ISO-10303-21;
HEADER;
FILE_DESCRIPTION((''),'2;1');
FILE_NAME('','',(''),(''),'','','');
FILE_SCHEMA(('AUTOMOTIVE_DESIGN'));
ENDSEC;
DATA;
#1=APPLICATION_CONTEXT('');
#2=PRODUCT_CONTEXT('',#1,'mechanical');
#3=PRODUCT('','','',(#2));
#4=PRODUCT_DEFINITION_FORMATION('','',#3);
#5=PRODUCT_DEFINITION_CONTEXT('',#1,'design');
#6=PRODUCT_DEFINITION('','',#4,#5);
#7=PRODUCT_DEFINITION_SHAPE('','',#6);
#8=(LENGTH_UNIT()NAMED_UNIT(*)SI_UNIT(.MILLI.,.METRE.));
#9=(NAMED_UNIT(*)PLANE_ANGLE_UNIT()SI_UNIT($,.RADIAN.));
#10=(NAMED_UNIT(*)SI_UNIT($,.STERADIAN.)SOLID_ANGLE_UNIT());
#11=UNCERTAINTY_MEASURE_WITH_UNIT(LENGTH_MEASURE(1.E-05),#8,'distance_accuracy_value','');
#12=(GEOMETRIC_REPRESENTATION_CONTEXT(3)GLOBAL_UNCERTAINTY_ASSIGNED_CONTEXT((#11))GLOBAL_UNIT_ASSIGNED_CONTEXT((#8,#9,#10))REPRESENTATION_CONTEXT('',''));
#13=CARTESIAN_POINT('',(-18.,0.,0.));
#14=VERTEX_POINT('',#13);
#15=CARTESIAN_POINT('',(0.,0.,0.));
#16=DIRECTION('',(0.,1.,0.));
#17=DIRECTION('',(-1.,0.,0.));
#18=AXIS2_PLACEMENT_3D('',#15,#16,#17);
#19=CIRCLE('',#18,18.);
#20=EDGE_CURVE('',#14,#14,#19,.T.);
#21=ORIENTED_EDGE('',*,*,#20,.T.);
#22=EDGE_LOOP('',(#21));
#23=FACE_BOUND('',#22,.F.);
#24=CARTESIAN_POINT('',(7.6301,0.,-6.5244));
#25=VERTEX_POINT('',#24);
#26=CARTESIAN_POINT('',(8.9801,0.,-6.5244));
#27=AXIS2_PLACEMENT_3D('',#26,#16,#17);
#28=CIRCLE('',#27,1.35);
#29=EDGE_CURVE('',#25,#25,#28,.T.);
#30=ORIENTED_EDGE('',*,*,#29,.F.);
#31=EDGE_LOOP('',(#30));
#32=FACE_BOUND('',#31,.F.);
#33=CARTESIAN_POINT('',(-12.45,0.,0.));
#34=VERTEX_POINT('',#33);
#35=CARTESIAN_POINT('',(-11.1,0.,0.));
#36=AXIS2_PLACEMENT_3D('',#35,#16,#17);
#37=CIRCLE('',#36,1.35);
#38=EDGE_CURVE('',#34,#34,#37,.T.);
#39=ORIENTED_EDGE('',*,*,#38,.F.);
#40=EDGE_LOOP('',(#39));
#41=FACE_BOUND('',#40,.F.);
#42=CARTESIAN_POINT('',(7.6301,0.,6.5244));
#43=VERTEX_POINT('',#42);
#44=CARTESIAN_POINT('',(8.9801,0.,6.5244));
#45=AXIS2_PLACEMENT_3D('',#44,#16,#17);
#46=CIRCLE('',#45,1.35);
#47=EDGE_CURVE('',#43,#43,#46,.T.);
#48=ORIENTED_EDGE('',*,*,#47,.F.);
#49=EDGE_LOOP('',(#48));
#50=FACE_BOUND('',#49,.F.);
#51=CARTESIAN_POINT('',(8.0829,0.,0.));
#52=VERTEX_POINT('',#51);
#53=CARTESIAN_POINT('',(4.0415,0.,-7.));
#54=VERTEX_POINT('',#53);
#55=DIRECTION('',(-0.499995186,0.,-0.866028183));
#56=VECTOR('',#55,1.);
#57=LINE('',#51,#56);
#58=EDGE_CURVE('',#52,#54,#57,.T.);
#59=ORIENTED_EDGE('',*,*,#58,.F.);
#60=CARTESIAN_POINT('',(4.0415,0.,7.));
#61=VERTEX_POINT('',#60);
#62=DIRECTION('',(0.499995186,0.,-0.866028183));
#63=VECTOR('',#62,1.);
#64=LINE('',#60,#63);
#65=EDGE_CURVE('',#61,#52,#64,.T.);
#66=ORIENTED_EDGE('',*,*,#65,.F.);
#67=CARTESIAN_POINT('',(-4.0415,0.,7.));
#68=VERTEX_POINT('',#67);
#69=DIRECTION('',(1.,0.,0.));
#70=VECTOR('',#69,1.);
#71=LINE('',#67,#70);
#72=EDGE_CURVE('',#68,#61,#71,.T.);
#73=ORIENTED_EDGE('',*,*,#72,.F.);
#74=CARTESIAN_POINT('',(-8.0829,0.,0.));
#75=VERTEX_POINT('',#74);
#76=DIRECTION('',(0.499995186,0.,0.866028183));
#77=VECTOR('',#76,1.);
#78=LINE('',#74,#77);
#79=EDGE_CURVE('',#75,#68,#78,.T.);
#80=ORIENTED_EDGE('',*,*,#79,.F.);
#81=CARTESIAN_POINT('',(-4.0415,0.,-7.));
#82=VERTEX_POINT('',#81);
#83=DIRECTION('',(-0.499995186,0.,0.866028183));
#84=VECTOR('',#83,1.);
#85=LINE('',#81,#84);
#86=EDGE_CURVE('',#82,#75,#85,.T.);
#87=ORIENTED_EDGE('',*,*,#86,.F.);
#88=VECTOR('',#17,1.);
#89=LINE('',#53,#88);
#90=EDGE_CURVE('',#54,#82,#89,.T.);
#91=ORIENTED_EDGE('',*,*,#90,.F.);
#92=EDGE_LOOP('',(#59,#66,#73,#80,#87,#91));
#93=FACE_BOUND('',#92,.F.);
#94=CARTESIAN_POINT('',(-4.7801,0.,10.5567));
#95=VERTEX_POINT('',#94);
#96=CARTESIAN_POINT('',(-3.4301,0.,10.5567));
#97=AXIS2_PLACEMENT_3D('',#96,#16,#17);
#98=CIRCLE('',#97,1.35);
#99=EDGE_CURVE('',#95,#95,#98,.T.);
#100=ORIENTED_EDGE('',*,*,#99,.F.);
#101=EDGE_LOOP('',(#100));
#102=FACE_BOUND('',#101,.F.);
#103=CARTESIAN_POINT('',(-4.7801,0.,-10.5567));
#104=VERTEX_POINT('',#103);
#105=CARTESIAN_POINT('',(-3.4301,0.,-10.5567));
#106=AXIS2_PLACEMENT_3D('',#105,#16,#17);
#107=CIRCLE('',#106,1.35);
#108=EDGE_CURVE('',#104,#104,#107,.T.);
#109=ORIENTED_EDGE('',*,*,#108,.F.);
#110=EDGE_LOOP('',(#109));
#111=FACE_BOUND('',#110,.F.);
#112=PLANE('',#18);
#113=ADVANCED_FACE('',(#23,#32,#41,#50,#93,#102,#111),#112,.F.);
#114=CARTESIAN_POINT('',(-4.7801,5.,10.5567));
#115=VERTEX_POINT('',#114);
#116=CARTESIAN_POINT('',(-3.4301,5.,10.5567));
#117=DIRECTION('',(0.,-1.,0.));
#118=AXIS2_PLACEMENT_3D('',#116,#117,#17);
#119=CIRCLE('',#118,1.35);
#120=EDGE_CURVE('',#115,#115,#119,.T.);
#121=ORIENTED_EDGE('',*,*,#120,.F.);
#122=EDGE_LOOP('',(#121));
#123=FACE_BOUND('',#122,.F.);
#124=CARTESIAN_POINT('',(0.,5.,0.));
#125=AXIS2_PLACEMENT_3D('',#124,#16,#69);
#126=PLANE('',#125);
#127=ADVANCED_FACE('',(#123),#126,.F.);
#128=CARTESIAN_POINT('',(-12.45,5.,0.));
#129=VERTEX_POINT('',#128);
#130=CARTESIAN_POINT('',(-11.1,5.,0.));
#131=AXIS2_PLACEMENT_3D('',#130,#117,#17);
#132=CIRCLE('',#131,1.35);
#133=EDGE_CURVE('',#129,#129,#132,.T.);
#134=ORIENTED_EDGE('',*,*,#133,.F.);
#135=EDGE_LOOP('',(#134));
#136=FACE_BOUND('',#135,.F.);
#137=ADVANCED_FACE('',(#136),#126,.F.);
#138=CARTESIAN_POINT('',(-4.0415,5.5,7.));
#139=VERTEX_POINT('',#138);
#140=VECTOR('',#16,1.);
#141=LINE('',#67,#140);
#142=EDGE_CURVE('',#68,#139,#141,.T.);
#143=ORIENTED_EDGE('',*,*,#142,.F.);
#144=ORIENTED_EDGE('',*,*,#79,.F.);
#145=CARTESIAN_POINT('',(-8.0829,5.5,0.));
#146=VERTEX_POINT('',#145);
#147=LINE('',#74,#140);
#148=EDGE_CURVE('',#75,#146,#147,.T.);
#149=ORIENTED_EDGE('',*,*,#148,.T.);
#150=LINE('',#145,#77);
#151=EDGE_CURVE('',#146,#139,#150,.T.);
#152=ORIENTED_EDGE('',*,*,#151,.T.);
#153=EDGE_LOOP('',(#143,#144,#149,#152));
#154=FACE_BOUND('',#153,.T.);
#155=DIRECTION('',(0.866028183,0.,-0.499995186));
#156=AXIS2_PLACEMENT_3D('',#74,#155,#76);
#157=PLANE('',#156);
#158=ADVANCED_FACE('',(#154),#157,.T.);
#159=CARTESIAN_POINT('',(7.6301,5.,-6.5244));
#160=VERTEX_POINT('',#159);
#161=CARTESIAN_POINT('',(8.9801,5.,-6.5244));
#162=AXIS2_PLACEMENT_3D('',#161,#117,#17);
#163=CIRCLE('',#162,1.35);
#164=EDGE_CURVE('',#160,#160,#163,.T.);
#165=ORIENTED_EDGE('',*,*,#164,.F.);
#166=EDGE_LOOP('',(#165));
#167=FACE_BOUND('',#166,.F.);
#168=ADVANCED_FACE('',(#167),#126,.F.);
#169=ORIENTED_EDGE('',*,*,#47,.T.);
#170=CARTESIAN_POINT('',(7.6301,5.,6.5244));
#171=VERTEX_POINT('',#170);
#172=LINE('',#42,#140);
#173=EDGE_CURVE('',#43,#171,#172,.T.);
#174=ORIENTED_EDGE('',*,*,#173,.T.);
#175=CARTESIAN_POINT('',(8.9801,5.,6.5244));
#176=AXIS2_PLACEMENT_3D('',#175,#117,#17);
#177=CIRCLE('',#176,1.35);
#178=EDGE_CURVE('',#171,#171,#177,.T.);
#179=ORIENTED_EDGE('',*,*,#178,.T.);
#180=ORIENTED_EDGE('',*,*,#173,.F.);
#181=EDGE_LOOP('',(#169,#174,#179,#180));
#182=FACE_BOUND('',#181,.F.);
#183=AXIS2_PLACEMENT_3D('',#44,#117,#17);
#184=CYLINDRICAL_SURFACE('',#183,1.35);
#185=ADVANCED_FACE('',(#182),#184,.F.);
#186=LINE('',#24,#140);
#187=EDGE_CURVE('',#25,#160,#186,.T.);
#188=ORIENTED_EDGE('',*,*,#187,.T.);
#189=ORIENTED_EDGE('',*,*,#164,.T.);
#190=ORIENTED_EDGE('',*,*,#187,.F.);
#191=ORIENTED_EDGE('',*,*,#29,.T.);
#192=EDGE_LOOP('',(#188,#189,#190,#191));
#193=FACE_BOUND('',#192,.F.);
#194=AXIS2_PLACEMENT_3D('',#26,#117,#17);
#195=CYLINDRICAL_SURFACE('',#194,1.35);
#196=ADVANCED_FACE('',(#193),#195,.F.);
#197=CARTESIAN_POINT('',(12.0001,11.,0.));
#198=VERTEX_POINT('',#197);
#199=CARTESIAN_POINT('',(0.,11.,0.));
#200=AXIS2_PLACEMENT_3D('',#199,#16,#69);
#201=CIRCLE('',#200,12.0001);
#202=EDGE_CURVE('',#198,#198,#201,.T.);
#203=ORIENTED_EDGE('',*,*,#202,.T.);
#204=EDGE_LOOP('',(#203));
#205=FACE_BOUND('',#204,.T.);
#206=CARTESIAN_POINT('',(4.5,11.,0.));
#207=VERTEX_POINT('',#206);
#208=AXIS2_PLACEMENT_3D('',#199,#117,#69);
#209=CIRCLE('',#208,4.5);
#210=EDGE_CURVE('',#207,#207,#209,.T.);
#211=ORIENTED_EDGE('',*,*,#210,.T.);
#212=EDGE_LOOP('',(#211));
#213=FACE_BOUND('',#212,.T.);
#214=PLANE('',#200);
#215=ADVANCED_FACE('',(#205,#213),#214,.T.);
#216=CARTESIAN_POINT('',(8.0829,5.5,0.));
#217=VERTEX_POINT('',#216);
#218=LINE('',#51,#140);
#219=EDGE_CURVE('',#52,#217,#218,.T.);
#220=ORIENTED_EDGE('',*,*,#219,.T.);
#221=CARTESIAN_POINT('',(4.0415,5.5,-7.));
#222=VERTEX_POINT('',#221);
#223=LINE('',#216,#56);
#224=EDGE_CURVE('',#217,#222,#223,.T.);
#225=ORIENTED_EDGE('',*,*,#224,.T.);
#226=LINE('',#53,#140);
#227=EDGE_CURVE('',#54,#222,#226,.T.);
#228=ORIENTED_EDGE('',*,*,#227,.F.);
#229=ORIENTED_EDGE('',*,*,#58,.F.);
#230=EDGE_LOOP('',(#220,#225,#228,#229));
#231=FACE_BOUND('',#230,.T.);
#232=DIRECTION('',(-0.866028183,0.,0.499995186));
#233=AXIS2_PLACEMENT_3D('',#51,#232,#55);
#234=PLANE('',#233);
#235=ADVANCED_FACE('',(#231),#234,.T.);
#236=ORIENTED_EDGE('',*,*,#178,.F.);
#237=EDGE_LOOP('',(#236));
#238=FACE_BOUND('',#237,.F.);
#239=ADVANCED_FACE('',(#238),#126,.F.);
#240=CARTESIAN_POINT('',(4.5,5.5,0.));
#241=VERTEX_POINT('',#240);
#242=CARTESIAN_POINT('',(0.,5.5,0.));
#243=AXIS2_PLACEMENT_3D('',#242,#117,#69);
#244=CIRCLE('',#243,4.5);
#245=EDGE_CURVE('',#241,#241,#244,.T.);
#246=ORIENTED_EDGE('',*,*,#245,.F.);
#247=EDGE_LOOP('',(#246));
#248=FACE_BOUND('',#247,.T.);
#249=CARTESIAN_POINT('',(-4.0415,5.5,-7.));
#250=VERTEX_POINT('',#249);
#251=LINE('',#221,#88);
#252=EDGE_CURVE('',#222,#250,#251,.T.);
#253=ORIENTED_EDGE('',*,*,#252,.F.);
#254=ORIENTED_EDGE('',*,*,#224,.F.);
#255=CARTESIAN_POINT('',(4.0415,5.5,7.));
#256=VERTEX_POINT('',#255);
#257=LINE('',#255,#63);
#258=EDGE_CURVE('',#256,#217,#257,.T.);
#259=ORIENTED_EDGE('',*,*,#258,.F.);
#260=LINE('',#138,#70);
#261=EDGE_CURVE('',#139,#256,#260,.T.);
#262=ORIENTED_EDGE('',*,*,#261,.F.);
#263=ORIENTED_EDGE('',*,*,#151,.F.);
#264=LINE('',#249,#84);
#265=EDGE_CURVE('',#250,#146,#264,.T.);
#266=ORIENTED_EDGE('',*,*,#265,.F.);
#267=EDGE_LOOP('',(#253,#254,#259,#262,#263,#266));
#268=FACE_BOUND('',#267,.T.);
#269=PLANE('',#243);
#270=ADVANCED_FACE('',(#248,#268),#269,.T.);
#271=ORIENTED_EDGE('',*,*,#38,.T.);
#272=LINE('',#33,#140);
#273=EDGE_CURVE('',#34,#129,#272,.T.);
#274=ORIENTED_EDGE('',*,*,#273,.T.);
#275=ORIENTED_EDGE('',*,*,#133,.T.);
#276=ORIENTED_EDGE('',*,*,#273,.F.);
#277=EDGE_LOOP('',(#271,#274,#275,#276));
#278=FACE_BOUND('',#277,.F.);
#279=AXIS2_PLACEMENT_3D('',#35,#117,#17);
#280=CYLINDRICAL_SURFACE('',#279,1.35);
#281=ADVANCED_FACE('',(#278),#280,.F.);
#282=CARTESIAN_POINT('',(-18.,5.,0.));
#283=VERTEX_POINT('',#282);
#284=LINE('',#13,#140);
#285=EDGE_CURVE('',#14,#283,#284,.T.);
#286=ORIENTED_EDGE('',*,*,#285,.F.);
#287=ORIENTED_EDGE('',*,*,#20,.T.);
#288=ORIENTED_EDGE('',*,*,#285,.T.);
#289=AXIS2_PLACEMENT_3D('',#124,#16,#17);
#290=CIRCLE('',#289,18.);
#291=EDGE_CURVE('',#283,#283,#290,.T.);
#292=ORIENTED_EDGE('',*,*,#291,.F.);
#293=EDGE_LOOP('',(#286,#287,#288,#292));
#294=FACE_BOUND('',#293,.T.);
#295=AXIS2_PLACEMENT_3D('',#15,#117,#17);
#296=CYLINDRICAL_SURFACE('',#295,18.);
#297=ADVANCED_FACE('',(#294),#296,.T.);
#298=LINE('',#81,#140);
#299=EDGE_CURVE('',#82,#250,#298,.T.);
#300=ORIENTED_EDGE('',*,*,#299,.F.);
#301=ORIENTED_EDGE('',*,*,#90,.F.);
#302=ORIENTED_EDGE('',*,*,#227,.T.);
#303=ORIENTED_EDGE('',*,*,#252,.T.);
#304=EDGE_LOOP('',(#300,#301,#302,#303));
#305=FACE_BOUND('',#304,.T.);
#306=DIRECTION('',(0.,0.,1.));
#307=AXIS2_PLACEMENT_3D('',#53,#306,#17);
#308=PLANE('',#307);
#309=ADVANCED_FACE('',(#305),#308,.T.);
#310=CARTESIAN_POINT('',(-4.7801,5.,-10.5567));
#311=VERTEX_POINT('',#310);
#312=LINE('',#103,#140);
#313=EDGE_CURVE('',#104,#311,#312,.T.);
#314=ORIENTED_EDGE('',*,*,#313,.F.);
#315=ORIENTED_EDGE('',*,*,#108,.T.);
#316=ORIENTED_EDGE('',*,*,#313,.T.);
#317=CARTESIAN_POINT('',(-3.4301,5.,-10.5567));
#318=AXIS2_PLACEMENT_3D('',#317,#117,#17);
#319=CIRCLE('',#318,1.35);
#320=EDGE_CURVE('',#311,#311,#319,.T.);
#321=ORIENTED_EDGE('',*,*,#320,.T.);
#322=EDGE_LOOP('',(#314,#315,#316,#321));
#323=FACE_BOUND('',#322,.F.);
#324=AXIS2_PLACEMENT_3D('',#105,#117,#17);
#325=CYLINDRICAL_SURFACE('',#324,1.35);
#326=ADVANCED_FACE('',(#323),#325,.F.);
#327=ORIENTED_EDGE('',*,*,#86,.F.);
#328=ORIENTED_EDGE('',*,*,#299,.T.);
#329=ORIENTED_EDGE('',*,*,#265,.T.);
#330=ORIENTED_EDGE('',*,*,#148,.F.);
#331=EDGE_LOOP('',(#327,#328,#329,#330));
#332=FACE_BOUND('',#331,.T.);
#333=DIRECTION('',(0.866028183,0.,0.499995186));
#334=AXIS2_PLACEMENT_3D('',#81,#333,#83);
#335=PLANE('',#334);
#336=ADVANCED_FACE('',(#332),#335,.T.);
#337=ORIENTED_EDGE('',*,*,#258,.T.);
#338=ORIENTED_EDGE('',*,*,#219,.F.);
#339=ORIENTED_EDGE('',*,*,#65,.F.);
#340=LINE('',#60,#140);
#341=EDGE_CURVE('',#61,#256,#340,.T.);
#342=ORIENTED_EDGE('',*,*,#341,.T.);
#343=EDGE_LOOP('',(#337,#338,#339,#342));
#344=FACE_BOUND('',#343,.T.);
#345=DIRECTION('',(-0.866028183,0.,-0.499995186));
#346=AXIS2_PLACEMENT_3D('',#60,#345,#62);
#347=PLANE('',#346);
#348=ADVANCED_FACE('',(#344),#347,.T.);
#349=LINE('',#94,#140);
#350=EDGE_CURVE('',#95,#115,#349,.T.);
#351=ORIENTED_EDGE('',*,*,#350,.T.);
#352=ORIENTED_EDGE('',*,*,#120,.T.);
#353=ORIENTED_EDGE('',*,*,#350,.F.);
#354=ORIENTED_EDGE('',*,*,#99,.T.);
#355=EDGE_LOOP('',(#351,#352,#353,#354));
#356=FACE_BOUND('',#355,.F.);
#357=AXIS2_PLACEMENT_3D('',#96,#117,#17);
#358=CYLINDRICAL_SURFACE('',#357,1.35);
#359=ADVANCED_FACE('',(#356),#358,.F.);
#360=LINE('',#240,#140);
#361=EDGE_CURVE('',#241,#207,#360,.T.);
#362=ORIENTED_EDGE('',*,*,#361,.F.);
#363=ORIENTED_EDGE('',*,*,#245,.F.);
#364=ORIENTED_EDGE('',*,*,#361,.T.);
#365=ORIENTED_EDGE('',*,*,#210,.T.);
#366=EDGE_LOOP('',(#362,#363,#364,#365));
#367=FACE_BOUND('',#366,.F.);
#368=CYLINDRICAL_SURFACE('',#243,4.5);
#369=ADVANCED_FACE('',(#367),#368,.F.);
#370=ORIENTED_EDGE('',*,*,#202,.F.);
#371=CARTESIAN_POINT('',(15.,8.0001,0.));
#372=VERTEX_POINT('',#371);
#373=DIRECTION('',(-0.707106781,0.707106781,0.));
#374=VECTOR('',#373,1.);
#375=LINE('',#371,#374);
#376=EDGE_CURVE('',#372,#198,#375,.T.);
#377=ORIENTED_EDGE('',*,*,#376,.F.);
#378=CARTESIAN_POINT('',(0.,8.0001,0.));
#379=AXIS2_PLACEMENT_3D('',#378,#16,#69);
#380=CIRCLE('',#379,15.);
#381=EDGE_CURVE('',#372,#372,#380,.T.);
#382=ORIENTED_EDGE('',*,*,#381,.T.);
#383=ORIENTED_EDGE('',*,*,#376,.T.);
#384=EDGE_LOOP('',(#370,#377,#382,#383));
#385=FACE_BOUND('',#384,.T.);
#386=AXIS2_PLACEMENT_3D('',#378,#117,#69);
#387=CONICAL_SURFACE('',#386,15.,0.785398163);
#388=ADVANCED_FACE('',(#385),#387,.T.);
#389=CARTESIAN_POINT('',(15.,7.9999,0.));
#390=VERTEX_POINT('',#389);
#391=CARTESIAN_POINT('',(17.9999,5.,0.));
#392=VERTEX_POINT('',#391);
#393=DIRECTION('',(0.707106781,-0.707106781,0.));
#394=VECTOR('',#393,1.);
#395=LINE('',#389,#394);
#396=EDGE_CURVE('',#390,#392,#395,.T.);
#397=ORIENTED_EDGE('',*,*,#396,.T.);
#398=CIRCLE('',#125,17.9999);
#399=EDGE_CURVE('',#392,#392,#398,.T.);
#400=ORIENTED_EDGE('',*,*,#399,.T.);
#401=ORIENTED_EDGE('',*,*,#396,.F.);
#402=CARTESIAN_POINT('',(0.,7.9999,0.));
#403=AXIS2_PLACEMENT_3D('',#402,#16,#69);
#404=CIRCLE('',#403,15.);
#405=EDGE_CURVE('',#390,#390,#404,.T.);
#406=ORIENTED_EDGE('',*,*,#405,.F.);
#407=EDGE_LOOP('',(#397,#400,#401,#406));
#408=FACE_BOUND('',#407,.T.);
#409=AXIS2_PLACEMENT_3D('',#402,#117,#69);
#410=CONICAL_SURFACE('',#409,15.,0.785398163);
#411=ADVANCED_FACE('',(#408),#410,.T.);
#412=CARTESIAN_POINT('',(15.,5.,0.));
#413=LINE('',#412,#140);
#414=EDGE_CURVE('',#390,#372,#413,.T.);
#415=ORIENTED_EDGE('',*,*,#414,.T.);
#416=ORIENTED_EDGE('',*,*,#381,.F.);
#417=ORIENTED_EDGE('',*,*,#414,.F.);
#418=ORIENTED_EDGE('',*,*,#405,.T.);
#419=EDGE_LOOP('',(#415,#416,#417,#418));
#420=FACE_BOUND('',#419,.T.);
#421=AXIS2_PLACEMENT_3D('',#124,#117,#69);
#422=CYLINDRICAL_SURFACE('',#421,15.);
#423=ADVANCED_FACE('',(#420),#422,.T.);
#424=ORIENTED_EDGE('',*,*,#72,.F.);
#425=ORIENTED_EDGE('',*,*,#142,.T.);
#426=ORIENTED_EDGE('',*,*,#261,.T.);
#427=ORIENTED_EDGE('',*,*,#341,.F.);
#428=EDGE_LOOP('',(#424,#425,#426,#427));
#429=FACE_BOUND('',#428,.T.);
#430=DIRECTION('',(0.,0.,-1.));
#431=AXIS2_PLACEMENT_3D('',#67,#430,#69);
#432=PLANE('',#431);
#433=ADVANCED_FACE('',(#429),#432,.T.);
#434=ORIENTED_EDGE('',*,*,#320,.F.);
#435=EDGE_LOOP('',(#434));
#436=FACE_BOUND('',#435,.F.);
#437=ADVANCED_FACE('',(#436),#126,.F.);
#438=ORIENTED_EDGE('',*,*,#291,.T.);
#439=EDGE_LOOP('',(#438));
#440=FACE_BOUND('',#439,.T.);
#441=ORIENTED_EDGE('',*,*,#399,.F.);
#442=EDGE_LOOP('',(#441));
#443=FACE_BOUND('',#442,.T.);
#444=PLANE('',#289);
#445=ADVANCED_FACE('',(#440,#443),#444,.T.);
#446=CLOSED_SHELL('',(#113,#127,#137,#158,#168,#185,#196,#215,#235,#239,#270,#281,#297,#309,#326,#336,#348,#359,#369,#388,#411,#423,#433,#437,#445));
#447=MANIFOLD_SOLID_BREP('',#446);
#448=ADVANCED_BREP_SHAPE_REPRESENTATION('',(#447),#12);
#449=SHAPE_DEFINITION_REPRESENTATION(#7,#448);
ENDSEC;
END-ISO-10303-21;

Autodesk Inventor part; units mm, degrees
ref_plane "YZ Plane" through (0, 0, 0) normal (1, 0, 0) x (0, 1, 0)
ref_plane "XZ Plane" through (0, 0, 0) normal (0, 1, 0) x (-1, 0, 0)
ref_plane "XY Plane" through (0, 0, 0) normal (0, 0, 1) x (1, 0, 0)
sketch "Sketch1" plane through (0, 0, 0) normal (0, 1, 0) x (-1, 0, 0)
  circle A0 centre (0, 0) radius 18
  line L0 (10.3065, -1.0922) -> (4.2236, -9.4646)
  line L1 (2.1462, -10.1396) -> (-7.6962, -6.9416)
  line L2 (-8.9801, -5.1744) -> (-8.9801, 5.1744)
  line L3 (-7.6962, 6.9416) -> (2.1462, 10.1396)
  line L4 (4.2236, 9.4646) -> (10.3065, 1.0922)
  circle A1 centre (3.4301, 10.5567) radius 1.35
  circle A2 centre (11.1, 0) radius 1.35
  circle A3 centre (-8.9801, 6.5244) radius 1.35
  circle A4 centre (-8.9801, -6.5244) radius 1.35
  circle A5 centre (3.4301, -10.5567) radius 1.35
  arc A6 (11.0179, 1.3475) -> (4.6863, 10.0622) centre (0, 0) ccw
  arc A7 (4.6863, -10.0622) -> (11.0179, -1.3475) centre (0, 0) ccw
  arc A8 (-8.1216, -7.5663) -> (2.1232, -10.8951) centre (0, 0) ccw
  arc A9 (2.1232, 10.8951) -> (-8.1216, 7.5663) centre (0, 0) ccw
  arc A10 (-9.7057, 5.386) -> (-9.7057, -5.386) centre (0, 0) ccw
  dimension "d0" = 36
  dimension "d2" = 2.7
  dimension "d3" = 2.7
  dimension "d4" = 2.7
  dimension "d5" = 2.7
  dimension "d6" = 2.7
extrude "Extrusion1" add sketch "Sketch1" along normal blind 5 contours A0 | A2 A7 A5 L0 | L0 A5 L1 A4 L2 A3 L3 A1 L4 A2 | L4 A1 A6 A2 | A5 A8 A4 L1 | L3 A3 A9 A1 | A10 A3 L2 A4
sketch "Sketch2" plane through (0, 5, 0) normal (0, 1, 0) x (1, 0, 0)
  circle A0 centre (0, 0) radius 18 projected
  circle A1 centre (0, 0) radius 15
  point P0 (2.5, -14.7902)
  point P1 (2.5, 14.7902)
  dimension "d9" = 30
extrude "Extrusion2" add sketch "Sketch2" along normal blind 6 contours A1
sketch "Sketch3" plane through (0, 0, 0) normal (0, -1, 0) x (1, 0, 0)
  circle A0 centre (0, 0) radius 18 projected
  line L0 (-8.0829, 0) -> (-4.0415, 7)
  line L1 (-4.0415, 7) -> (4.0415, 7)
  line L2 (4.0415, 7) -> (8.0829, 0)
  line L3 (8.0829, 0) -> (4.0415, -7)
  line L4 (4.0415, -7) -> (-4.0415, -7)
  line L5 (-4.0415, -7) -> (-8.0829, 0)
  dimension "d23" = 14
extrude "Extrusion3" cut sketch "Sketch3" against normal blind 5.5 contours L0 L1 L2 L3 L4 L5
sketch "Sketch4" plane through (0, 5.5, 0) normal (0, -1, 0) x (1, 0, 0)
  circle A0 centre (0, 0) radius 4.5
  dimension "d26" = 9
extrude "Extrusion4" cut sketch "Sketch4" against normal blind 9
chamfer "Chamfer1" distance 3 angle 45 2 edges at (-15, 5, 0) (-15, 11, 0)
equation "\"BendRadius\" = Thickness"
equation "\"BendReliefWidth\" = Thickness"
equation "\"BendReliefDepth\" = 0.5 * Thickness"
equation "\"CornerReliefSize\" = 4 * Thickness"
equation "\"MinimumRemnant\" = 2 * Thickness"
equation "\"TransitionRadius\" = BendRadius"
equation "\"JacobiRadiusSize\" = BendRadius"
equation "\"GapSize\" = Thickness"
equation "\"Thickness\" = 0.5"
properties part number "motorSupportNew1"
